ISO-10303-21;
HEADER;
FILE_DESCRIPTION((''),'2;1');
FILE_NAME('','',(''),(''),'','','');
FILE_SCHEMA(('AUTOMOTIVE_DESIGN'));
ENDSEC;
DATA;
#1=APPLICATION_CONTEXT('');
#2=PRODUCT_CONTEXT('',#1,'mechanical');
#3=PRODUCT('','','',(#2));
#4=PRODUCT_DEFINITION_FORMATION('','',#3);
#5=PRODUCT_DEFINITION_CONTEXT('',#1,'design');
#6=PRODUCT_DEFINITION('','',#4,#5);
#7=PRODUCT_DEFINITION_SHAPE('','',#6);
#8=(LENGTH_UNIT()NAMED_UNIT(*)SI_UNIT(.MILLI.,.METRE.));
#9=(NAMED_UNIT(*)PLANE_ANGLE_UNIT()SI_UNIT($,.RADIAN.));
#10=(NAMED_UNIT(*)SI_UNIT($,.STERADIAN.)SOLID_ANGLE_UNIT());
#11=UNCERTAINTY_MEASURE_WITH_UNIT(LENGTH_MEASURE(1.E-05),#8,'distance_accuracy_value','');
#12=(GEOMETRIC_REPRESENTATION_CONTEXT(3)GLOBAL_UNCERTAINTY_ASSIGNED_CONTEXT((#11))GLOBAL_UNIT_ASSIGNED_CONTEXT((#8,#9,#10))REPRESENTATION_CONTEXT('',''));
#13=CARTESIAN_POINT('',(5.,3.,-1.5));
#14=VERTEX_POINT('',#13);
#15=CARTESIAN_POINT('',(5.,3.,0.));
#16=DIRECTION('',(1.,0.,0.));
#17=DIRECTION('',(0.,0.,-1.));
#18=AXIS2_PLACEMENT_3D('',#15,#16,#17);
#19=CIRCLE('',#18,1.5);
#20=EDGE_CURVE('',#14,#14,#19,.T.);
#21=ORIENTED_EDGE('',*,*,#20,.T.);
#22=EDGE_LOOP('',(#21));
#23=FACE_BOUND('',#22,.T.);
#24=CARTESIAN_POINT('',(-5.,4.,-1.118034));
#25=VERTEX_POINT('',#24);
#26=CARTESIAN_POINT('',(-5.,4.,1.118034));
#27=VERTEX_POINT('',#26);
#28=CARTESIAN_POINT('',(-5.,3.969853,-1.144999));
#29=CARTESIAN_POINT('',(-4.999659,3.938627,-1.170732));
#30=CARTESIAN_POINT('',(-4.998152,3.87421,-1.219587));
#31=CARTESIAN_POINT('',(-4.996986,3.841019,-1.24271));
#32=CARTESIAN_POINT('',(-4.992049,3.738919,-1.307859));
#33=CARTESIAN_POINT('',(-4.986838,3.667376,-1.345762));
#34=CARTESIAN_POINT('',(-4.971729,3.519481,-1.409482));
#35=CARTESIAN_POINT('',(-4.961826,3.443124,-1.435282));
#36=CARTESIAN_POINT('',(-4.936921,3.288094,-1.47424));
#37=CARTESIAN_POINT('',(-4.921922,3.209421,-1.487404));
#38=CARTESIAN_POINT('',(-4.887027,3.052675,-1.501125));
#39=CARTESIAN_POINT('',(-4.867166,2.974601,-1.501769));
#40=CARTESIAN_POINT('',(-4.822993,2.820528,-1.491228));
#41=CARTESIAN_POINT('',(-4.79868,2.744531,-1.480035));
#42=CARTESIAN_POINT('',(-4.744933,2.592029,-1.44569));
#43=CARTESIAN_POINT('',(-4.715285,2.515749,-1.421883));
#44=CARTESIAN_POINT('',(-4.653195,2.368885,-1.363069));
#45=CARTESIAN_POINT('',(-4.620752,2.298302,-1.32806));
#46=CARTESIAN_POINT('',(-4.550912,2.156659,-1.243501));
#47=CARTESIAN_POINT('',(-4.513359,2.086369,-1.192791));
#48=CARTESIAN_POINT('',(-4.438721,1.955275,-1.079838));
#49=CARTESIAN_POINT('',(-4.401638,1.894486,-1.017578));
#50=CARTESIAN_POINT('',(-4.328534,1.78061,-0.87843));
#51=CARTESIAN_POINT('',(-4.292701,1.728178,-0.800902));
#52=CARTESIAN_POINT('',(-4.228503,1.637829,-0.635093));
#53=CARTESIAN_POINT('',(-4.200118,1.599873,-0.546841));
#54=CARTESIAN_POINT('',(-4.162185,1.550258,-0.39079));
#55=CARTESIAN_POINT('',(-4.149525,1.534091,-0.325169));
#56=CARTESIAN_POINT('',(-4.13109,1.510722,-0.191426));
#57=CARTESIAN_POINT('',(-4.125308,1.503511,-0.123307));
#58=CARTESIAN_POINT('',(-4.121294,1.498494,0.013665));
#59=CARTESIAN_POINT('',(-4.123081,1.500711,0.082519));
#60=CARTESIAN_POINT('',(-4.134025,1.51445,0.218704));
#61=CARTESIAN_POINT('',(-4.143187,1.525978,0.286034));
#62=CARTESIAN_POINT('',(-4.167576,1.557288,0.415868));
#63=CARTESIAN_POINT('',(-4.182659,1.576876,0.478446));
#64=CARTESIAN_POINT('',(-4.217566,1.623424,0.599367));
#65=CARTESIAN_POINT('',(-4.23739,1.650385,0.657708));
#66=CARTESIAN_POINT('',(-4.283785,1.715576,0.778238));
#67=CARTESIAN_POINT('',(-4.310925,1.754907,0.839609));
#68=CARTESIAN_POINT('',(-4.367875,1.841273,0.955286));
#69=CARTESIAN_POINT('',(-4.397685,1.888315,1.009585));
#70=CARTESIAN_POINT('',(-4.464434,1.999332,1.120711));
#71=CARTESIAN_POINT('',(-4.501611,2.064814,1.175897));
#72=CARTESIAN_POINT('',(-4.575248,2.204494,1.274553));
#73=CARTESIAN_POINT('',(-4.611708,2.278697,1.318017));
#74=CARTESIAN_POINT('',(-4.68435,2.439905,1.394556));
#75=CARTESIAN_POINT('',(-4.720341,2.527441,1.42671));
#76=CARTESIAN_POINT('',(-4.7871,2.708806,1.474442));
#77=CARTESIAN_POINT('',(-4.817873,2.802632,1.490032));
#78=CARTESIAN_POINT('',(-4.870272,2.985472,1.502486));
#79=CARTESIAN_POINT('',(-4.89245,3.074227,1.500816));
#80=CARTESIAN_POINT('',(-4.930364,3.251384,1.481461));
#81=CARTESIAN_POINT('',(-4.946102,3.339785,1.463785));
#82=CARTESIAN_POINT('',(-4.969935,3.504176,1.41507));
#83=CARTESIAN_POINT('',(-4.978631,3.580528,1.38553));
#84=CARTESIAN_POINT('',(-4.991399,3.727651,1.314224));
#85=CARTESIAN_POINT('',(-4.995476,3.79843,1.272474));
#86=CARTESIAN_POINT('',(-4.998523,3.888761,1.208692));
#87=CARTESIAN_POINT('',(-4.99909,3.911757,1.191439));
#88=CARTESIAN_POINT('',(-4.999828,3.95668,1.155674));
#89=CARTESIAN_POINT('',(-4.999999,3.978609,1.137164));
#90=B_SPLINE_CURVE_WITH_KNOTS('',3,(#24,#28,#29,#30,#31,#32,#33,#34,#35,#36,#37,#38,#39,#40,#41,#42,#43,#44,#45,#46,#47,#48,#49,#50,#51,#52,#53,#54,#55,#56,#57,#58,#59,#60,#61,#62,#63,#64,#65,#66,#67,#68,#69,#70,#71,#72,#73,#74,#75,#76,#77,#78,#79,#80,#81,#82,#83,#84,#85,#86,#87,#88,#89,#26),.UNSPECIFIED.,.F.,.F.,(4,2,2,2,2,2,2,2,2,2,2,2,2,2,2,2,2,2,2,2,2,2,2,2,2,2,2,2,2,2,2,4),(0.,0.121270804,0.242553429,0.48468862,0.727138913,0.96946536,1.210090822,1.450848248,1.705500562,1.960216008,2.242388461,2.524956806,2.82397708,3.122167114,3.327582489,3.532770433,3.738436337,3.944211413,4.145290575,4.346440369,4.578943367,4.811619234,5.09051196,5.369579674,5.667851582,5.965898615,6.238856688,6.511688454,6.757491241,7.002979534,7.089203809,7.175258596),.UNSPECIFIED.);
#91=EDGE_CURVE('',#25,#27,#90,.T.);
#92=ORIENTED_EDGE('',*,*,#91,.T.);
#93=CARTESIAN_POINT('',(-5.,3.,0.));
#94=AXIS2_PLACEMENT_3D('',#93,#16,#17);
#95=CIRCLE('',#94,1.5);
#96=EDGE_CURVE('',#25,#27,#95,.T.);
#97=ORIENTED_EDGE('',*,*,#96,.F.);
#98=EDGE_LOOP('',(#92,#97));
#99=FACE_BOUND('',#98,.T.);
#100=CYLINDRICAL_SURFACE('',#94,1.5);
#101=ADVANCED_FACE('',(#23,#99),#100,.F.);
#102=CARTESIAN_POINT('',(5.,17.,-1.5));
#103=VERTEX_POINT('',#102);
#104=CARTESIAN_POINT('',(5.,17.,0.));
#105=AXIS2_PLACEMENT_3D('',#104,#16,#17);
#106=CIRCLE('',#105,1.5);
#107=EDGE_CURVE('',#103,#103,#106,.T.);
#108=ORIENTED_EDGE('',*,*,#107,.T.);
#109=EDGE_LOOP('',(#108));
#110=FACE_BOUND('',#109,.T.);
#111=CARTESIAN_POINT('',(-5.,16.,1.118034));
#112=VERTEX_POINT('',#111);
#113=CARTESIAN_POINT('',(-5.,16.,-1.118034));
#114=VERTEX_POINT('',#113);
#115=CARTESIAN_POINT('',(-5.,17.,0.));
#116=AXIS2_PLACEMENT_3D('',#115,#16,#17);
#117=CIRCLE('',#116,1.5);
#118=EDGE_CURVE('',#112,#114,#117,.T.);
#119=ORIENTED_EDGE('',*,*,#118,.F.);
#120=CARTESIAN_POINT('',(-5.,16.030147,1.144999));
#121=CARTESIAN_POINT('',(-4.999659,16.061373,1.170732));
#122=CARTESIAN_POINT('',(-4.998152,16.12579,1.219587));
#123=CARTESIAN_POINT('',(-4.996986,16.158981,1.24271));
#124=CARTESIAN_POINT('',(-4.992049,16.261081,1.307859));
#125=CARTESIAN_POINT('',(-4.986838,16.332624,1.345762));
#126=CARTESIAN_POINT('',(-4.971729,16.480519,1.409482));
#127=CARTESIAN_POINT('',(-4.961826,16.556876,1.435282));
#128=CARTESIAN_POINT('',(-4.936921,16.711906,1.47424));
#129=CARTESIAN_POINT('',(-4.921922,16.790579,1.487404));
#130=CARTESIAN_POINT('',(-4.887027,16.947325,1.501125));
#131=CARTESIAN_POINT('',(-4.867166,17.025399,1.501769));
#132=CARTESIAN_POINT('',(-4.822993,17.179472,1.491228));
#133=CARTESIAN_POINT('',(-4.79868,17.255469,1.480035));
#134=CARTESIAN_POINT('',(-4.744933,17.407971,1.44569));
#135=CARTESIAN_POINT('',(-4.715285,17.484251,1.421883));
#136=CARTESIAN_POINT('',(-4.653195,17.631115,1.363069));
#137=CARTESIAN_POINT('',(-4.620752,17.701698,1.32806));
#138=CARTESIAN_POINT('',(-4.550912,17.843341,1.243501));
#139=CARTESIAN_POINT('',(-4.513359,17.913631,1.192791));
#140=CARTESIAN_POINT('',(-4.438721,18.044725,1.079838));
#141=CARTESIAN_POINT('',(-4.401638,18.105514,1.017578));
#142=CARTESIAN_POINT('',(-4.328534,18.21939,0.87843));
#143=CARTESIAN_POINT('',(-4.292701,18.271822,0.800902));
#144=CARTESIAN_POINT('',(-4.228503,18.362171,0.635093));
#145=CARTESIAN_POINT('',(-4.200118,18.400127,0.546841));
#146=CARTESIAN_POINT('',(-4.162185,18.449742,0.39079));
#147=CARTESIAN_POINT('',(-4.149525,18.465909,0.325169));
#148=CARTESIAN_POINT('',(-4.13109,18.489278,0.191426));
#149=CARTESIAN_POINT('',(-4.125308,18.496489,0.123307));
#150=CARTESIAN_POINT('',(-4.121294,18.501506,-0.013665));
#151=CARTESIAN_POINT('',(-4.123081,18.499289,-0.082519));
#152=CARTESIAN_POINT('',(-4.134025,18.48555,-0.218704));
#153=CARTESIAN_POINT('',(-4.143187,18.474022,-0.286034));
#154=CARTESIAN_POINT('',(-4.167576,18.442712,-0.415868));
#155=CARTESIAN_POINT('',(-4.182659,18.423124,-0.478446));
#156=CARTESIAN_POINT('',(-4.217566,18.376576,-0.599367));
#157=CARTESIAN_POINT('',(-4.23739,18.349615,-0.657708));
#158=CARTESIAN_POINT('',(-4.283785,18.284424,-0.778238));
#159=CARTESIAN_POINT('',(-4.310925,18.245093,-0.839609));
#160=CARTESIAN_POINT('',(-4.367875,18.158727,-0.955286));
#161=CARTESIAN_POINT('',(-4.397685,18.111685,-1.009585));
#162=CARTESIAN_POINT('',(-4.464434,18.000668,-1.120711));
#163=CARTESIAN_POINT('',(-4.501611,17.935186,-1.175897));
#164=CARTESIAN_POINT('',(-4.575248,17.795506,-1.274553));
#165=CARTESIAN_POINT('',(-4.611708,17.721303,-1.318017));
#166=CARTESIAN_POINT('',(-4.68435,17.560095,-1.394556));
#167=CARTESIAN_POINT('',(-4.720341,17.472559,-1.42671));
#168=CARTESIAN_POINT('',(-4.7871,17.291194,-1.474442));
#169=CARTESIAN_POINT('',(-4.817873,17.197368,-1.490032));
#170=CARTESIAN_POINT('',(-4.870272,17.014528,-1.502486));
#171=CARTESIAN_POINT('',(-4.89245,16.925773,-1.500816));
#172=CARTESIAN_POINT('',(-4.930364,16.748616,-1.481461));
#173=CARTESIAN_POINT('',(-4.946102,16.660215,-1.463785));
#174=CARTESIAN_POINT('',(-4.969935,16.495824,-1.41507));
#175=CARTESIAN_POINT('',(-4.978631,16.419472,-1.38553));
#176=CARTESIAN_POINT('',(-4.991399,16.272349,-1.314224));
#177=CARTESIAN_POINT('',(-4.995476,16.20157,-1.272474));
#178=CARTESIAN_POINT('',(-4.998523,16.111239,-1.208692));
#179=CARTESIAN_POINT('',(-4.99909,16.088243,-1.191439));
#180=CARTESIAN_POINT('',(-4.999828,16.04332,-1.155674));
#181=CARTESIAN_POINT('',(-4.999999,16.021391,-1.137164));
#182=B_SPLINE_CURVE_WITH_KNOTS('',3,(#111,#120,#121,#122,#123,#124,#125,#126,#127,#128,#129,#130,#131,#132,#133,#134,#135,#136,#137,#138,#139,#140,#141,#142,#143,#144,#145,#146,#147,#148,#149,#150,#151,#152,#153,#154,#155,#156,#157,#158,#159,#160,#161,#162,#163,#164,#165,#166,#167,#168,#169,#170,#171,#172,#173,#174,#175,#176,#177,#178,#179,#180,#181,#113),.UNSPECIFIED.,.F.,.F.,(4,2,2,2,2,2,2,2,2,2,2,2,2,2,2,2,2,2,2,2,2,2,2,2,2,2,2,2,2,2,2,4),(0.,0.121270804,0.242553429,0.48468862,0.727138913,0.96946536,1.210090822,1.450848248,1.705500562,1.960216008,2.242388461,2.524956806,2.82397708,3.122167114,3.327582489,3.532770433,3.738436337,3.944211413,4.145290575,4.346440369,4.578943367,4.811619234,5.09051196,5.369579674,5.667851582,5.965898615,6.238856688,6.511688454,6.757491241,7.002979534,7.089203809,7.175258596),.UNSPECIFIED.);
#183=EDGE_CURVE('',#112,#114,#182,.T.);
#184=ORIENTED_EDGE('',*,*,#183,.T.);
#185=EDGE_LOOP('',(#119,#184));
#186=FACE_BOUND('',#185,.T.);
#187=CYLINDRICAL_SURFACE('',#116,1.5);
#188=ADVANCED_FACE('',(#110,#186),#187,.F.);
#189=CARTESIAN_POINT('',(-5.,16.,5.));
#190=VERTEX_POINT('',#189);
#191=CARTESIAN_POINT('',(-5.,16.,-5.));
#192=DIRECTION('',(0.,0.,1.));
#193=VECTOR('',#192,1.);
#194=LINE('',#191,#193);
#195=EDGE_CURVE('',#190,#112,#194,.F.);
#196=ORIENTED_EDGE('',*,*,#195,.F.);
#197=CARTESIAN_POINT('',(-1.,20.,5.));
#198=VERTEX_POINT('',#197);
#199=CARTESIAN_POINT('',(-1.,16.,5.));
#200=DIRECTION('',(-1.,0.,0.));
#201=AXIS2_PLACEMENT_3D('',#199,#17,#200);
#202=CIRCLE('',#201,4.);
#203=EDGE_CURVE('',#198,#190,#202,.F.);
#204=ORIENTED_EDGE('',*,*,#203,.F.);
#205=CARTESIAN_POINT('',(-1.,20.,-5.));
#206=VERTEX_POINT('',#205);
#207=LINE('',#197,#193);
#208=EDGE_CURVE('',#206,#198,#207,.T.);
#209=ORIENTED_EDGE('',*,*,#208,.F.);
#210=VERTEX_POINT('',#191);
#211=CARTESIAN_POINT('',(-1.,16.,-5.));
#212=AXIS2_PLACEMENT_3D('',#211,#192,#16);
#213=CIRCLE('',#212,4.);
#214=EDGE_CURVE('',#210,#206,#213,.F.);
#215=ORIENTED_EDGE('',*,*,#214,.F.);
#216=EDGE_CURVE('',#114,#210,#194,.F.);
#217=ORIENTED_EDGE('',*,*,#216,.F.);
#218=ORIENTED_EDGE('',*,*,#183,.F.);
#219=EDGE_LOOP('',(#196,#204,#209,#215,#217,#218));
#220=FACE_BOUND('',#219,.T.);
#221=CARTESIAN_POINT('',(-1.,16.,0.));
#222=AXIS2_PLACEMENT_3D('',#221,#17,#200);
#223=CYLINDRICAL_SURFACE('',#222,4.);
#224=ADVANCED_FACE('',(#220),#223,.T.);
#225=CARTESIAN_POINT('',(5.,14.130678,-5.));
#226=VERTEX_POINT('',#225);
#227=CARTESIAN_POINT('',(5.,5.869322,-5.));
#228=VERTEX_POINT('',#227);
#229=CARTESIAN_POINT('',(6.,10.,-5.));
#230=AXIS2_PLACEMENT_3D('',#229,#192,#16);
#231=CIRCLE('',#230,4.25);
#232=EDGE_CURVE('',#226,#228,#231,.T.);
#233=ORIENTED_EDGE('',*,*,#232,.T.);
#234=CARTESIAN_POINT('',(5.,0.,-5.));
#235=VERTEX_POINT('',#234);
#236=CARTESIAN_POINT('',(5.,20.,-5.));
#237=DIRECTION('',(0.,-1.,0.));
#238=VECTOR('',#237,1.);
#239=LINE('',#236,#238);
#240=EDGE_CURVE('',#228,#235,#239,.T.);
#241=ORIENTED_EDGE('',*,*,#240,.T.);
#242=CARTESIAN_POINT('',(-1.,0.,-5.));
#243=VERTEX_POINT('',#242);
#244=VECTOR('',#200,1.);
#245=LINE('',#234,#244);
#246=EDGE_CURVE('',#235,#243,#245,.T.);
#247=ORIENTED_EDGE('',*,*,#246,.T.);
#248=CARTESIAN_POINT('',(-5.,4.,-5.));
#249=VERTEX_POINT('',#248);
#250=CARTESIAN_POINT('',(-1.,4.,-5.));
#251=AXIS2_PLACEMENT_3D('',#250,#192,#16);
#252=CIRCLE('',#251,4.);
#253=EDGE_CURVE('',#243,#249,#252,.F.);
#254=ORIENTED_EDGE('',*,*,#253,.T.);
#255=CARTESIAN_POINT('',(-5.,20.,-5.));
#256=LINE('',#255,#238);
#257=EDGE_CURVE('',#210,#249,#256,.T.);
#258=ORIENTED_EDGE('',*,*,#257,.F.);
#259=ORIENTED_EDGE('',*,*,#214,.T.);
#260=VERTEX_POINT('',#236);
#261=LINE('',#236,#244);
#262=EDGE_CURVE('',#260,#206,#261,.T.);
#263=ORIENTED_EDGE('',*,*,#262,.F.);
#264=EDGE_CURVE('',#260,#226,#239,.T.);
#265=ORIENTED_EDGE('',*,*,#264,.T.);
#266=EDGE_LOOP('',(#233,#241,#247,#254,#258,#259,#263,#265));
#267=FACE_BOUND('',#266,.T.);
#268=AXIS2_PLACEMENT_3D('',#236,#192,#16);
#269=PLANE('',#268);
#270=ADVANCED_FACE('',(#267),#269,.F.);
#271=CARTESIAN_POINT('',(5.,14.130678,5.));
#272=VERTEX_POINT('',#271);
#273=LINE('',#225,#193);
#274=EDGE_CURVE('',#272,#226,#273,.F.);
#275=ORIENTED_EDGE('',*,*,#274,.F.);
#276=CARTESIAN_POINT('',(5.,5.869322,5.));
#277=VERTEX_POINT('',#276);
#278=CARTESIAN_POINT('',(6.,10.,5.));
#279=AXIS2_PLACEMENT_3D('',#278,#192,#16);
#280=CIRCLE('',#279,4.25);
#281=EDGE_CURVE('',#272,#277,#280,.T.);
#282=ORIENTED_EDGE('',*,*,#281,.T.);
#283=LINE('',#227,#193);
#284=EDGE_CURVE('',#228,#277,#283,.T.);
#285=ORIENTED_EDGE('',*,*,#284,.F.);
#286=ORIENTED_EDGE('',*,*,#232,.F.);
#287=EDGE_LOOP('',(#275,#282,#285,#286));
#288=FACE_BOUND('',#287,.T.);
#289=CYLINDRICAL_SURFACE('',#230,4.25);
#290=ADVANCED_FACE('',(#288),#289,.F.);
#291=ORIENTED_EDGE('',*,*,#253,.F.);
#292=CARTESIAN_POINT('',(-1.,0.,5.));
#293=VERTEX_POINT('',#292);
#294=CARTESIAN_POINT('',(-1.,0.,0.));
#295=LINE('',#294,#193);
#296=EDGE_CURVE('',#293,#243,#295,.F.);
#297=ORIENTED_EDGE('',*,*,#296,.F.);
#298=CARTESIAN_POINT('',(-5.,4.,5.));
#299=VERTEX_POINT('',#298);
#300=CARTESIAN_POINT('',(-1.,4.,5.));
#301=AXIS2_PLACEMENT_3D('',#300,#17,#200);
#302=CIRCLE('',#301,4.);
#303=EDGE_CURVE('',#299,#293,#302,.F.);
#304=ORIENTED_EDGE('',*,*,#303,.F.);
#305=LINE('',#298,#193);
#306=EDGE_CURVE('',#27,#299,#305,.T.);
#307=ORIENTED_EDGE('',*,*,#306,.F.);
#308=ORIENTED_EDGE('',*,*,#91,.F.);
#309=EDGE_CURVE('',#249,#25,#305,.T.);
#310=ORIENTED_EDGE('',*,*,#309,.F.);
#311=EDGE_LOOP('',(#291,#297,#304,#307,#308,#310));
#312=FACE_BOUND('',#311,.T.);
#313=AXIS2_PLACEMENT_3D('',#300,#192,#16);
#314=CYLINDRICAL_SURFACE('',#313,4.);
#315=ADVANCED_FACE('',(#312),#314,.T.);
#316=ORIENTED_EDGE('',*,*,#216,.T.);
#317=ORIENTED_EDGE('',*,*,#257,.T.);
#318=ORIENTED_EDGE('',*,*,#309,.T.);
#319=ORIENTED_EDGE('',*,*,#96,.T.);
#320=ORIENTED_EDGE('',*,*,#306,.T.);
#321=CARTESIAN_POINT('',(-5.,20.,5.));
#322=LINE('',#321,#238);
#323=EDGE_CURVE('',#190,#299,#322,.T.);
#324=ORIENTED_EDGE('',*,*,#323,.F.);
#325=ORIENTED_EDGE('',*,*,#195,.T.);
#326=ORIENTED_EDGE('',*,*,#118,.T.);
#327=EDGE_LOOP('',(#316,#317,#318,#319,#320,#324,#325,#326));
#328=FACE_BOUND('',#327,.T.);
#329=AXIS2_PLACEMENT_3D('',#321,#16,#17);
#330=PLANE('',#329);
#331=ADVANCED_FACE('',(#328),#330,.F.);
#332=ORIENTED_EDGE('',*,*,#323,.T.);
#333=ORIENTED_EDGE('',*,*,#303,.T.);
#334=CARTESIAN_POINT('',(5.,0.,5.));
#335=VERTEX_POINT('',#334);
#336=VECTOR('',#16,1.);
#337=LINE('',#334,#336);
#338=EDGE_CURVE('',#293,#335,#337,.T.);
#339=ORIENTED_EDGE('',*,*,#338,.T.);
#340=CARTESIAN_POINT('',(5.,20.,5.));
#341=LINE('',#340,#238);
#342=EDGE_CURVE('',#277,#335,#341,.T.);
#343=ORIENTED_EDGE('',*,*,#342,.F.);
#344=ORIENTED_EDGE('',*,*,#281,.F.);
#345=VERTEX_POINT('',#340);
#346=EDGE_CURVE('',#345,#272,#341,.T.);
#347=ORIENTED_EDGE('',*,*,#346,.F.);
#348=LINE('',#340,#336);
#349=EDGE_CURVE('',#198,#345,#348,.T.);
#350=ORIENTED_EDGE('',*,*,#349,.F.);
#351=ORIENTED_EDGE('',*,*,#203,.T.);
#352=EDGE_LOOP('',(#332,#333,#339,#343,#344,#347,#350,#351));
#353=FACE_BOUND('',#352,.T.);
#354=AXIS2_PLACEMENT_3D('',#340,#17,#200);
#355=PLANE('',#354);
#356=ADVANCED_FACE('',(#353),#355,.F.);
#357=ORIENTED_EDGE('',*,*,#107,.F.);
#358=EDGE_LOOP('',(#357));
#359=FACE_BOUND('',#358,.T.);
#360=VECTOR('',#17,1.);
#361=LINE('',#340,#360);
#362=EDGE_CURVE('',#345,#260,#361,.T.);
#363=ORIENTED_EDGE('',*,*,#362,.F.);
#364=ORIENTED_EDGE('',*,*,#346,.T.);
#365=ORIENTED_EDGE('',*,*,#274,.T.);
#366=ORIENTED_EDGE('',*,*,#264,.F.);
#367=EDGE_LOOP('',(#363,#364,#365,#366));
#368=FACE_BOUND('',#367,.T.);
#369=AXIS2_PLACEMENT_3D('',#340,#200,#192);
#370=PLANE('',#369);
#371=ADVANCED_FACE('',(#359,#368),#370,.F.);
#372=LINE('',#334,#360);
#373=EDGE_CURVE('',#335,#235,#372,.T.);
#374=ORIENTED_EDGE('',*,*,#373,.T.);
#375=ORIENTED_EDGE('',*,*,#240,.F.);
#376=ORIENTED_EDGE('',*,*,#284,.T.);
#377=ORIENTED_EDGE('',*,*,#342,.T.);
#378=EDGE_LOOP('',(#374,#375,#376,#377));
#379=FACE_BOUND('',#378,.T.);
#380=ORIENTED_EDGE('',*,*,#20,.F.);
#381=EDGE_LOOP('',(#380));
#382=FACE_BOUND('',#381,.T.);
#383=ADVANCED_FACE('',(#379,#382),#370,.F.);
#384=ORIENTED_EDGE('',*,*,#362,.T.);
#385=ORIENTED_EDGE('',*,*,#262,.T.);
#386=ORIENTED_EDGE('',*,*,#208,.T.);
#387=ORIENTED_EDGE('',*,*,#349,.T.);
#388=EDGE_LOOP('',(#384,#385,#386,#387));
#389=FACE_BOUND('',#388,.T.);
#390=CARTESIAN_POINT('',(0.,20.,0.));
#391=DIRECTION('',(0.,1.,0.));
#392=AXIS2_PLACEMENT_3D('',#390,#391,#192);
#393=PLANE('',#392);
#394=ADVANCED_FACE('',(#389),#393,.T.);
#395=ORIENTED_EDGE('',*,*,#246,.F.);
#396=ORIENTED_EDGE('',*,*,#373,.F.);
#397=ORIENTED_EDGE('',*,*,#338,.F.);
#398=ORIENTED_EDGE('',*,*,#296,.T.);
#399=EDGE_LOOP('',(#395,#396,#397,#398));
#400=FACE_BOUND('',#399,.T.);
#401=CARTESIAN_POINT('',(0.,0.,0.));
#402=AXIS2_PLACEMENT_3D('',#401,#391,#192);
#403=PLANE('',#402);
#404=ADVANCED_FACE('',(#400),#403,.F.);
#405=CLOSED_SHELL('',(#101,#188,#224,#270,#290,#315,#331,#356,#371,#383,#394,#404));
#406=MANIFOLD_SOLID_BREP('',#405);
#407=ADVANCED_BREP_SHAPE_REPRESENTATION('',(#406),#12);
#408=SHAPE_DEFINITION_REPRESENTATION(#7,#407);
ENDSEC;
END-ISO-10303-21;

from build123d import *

# Parameters (mm, degrees)
SKETCH1_W           = 10
SKETCH1_H           = 10
BOSS_EXTRUDE1_DEPTH = 20
SKETCH2_R           = 4.25
CUT_EXTRUDE1_DEPTH  = 23.912878475
SKETCH3_R           = 1.5
CUT_EXTRUDE2_DEPTH  = 23.912878475
FILLET1_R           = 4


with BuildPart() as part:
    # Sketch1 → Boss-Extrude1 (new body)
    with BuildSketch(Plane(origin=(0, 0, 0), x_dir=(1, 0, 0), z_dir=(0, 1, 0))):
        Rectangle(SKETCH1_W, SKETCH1_H)
    extrude(amount=BOSS_EXTRUDE1_DEPTH)

    # Sketch2 → Cut-Extrude1 (cut, through all)
    with BuildSketch(Plane.XY.offset(5)):
        with Locations((6, 10)):
            Circle(SKETCH2_R)
    extrude(amount=-CUT_EXTRUDE1_DEPTH, mode=Mode.SUBTRACT)

    # Sketch3 → Cut-Extrude2 (cut, through all)
    with BuildSketch(Plane(origin=(5, 0, 0), x_dir=(0, 0, -1), z_dir=(1, 0, 0))):
        with Locations((0, 3)):
            Circle(SKETCH3_R)
        with Locations((0, 17)):
            Circle(SKETCH3_R)
    extrude(amount=-CUT_EXTRUDE2_DEPTH, mode=Mode.SUBTRACT)

    # Fillet1
    # the kernel refuses this fillet: 4 mm, written as the material it takes off along each edge
    with BuildSketch(Plane(origin=(-5, 20, 15), x_dir=(0, -1, 0), z_dir=(0, 0, -1)), Plane(origin=(-5, 0, 15), x_dir=(1, 0, 0), z_dir=(0, 0, -1))) as fillet1_piece_1:
        with BuildLine():
            CenterArc((FILLET1_R, -FILLET1_R), FILLET1_R, 90, 90)
            Line((0, -FILLET1_R), (0, 0))
            Line((0, 0), (FILLET1_R, 0))
        make_face()
    extrude(amount=30, mode=Mode.SUBTRACT)


solid = part.part
